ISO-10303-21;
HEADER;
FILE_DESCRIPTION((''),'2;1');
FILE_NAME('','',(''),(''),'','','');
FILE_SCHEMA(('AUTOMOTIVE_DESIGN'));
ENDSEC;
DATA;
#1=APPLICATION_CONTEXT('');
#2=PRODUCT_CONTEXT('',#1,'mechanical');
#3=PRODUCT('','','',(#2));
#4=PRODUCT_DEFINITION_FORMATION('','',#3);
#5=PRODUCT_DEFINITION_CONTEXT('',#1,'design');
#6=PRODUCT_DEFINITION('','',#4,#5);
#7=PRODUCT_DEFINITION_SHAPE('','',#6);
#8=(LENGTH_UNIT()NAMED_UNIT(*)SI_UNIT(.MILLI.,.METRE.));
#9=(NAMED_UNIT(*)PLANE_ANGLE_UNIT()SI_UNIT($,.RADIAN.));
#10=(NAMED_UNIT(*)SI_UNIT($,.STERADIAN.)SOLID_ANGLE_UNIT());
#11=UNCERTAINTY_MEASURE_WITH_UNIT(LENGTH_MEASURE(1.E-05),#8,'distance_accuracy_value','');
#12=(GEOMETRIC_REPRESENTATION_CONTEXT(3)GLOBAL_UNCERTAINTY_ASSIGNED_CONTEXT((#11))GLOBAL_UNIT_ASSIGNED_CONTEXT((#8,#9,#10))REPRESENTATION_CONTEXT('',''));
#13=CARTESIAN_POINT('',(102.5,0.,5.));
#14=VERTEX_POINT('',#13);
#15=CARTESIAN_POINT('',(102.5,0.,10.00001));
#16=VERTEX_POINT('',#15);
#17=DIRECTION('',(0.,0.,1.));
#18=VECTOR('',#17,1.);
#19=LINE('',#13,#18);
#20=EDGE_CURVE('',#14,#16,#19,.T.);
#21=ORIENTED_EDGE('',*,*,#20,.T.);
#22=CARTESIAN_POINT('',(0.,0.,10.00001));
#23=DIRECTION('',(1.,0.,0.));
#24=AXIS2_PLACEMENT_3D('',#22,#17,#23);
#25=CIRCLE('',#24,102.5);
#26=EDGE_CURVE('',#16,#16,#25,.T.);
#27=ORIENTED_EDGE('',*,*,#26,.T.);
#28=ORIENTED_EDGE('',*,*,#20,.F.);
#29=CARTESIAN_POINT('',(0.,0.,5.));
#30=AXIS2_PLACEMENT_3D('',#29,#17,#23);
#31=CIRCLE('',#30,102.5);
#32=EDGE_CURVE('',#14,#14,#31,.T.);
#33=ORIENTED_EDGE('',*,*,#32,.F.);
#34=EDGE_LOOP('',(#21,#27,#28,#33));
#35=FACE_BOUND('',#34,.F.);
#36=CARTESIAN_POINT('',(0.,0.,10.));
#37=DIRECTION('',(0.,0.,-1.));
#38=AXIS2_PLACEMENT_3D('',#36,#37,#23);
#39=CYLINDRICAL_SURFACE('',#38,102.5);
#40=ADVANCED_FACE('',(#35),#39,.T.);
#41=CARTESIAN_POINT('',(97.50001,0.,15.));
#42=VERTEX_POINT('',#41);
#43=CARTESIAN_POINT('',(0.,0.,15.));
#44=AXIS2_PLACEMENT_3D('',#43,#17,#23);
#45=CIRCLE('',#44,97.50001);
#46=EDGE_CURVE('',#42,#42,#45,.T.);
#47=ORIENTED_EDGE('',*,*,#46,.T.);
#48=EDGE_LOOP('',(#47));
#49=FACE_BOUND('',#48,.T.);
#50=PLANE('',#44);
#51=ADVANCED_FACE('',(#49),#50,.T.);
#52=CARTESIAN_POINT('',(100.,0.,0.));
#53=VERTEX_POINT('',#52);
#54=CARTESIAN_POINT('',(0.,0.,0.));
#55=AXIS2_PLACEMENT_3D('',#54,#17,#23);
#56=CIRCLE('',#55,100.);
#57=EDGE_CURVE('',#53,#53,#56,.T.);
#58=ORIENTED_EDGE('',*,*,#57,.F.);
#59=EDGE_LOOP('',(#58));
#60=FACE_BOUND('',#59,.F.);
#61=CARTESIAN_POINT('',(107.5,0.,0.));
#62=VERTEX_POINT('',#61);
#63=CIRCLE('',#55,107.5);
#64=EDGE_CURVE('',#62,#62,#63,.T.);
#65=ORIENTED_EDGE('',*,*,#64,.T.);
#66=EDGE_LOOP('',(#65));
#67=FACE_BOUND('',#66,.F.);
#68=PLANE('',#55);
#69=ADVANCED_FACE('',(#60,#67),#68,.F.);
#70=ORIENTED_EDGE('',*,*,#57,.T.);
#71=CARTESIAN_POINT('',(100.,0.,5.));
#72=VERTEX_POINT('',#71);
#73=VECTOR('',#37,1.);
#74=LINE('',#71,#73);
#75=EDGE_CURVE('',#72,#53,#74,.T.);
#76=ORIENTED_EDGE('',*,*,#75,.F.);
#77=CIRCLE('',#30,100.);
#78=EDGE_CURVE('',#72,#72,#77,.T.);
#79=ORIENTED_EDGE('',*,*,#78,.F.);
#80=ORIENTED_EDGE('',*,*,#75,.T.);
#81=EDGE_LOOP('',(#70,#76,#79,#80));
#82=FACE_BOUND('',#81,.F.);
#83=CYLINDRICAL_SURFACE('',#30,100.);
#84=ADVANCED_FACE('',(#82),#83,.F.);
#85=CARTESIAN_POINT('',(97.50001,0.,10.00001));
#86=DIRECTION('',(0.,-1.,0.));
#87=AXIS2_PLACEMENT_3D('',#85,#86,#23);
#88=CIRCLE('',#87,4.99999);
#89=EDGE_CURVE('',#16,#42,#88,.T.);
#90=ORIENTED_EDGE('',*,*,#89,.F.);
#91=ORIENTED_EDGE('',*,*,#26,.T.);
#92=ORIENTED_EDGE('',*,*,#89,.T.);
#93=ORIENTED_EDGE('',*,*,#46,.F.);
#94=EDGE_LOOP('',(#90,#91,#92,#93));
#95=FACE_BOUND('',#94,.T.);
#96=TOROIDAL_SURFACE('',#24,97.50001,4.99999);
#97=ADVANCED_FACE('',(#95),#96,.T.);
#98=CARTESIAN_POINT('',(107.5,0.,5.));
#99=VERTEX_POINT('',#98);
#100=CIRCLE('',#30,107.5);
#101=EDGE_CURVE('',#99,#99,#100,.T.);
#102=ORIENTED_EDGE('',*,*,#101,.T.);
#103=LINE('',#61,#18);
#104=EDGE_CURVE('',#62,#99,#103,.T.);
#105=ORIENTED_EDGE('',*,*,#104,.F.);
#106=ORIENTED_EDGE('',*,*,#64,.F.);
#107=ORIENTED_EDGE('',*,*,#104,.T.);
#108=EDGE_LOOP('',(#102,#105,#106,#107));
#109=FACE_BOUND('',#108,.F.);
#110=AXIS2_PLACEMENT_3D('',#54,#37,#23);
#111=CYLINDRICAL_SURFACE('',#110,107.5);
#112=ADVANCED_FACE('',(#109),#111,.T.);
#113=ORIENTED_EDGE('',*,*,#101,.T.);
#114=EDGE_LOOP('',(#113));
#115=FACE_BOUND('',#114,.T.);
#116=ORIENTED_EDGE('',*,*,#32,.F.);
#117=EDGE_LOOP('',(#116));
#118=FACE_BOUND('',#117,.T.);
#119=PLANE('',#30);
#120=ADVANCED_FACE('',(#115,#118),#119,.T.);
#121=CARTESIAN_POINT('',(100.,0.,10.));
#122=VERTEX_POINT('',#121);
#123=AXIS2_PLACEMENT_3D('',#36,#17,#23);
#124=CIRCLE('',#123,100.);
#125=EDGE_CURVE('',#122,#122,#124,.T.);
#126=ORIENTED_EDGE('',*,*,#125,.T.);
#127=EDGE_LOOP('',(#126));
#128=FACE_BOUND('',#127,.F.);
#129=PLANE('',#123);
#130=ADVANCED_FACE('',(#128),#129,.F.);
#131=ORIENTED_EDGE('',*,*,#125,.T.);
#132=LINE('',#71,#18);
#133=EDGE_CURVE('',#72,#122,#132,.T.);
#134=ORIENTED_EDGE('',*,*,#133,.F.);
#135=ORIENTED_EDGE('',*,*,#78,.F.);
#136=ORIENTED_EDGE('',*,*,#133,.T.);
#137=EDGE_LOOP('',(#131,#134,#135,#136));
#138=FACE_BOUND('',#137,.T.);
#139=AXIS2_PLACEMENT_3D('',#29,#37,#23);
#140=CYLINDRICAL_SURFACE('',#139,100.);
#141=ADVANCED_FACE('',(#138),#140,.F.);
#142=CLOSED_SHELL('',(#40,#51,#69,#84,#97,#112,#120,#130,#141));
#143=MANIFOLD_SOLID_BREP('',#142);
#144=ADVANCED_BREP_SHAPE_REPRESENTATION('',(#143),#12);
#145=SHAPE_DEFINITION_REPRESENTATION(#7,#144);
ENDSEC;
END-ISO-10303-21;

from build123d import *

# Parameters (mm, degrees)
F0_R     = 107.5
F1_DEPTH = 5
F2_R     = 100
F3_DEPTH = 6
F4_R     = 102.5
F4_R_2   = 100
F5_DEPTH = 5
F6_R     = 102.5
F7_DEPTH = 5
F8_R     = 4.99999


# Not quite as in the source:
# - a fillet or chamfer is up to 0.001 mm smaller than in the source, because OpenCascade refuses the exact size


with BuildPart() as f1:
    # F0 (on Top) → F1 (new body)
    with BuildSketch(Plane.XY):
        Circle(F0_R)
    extrude(amount=F1_DEPTH)

    # F2 (on face) → F3 (cut)
    with BuildSketch(Plane.XY.offset(5)):
        Circle(F2_R)
    extrude(amount=-F3_DEPTH, mode=Mode.SUBTRACT)

    # F4 (on face) → F5 (join)
    with BuildSketch(Plane.XY.offset(5)):
        Circle(F4_R)
        Circle(F4_R_2, mode=Mode.SUBTRACT)
    extrude(amount=F5_DEPTH)

    # F6 (on face) → F7 (join)
    with BuildSketch(Plane.XY.offset(10)):
        Circle(F6_R)
    extrude(amount=F7_DEPTH)

    # F8 (radius 5 in the source; OpenCascade refuses exactly that, so slightly less here)
    f8_edges = [f1.edges().sort_by_distance(p)[0] for p in [
        (-102.5, 0, 15),
    ]]
    fillet(f8_edges, radius=F8_R)


solid = f1.part
